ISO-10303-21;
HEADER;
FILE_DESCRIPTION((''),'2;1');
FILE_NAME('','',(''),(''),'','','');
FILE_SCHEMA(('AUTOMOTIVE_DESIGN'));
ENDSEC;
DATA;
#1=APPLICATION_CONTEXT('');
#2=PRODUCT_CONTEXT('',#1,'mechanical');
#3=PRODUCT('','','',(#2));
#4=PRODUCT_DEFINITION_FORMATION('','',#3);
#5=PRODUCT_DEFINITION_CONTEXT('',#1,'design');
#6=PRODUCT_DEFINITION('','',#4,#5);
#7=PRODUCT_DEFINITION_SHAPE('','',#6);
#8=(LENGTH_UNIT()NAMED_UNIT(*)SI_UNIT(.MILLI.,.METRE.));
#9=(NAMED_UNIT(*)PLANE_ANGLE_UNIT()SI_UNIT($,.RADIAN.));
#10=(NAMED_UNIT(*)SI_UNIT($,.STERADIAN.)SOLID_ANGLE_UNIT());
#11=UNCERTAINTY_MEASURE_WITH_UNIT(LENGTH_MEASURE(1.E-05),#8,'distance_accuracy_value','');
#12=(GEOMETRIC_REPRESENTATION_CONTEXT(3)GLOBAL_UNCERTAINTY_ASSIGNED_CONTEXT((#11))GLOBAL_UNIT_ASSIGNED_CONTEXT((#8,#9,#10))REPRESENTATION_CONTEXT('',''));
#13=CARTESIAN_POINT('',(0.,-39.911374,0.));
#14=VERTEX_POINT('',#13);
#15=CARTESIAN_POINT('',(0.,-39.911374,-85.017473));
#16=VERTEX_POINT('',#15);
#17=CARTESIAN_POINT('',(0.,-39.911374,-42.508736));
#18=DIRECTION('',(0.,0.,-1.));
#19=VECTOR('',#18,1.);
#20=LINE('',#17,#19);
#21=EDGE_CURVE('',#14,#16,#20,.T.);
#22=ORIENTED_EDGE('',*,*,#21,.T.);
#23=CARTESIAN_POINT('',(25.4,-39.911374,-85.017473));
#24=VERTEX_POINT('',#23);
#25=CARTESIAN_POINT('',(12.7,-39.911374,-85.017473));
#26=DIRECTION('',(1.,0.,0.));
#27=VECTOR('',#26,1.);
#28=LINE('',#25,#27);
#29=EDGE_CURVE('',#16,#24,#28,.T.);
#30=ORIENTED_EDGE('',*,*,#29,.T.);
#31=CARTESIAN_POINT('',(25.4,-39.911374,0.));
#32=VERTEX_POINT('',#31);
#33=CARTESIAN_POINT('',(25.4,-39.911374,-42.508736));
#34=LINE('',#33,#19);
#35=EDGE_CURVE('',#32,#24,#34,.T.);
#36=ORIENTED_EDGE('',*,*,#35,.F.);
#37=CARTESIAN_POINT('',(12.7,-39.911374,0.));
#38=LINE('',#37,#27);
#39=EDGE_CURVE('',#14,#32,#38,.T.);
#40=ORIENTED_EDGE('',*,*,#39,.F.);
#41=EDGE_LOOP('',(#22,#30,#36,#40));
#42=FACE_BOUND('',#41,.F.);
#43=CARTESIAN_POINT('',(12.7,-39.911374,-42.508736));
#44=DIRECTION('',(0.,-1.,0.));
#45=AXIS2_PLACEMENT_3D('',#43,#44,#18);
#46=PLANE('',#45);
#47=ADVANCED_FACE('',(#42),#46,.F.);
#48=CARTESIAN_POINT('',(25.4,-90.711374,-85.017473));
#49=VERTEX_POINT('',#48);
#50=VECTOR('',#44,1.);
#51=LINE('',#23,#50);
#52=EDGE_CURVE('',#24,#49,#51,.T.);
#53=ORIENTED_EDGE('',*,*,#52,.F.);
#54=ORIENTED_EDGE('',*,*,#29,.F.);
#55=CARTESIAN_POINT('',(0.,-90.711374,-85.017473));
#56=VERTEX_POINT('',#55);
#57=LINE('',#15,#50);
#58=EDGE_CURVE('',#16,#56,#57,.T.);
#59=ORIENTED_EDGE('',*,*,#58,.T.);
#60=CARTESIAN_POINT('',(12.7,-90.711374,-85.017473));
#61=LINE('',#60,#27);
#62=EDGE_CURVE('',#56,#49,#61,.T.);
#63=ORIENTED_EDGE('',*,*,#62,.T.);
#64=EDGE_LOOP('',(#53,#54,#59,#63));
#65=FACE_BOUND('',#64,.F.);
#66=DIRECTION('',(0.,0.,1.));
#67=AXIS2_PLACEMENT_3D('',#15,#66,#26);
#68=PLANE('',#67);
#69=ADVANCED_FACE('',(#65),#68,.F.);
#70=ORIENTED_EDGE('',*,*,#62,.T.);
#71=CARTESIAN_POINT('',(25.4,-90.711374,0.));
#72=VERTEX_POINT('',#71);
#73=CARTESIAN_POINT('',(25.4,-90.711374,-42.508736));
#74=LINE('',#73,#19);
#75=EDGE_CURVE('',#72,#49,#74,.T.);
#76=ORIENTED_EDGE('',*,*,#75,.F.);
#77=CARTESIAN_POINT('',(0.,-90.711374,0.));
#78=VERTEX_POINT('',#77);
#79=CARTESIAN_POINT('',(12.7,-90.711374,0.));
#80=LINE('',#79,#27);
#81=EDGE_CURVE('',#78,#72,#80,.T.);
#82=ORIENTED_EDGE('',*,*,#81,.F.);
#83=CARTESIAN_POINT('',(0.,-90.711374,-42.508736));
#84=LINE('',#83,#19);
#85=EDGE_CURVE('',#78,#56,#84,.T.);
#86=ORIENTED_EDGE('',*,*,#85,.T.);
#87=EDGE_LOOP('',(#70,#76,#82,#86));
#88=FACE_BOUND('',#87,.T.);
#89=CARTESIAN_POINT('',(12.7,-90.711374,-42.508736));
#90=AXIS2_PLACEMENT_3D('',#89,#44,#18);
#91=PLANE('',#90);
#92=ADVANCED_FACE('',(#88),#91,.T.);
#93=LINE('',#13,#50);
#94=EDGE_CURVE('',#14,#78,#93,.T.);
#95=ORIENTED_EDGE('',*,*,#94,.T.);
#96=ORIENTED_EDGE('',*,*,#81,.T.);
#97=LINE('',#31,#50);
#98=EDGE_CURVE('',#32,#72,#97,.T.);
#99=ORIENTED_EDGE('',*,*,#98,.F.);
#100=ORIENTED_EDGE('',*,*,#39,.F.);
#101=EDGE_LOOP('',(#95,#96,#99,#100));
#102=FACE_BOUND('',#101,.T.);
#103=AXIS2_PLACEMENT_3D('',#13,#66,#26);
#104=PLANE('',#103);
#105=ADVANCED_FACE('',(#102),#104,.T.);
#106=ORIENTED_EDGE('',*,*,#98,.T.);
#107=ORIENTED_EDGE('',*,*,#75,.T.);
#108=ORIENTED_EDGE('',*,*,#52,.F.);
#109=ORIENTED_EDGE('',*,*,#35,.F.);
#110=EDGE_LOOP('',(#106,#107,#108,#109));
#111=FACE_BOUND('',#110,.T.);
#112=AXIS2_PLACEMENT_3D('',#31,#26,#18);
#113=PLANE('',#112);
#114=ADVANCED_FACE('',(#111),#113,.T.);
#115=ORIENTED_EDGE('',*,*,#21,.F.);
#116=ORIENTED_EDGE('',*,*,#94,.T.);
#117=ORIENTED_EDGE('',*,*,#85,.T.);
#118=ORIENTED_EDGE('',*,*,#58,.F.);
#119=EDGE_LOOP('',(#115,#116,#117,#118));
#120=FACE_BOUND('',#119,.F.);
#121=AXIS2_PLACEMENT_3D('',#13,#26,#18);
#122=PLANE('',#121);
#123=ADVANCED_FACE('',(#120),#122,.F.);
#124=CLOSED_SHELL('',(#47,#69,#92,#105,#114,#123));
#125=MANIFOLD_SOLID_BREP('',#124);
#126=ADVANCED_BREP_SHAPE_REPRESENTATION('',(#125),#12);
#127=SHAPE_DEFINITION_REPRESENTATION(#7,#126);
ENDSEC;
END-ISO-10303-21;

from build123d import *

# Parameters (mm, degrees)
F1_E0_RIGHT_W = 85.0174725056
F1_E0_RIGHT_H = 25.4
F2_DEPTH      = 50.8


with BuildPart() as f2:
    # F1_E0_right (on explicit) → F2 (new body)
    with BuildSketch(Plane(origin=(0, -39.9113744497, 0), x_dir=(0, 0, -1), z_dir=(0, -1, 0))):
        with Locations((42.5087362528, 12.7)):
            Rectangle(F1_E0_RIGHT_W, F1_E0_RIGHT_H)
    extrude(amount=F2_DEPTH)


solid = f2.part
